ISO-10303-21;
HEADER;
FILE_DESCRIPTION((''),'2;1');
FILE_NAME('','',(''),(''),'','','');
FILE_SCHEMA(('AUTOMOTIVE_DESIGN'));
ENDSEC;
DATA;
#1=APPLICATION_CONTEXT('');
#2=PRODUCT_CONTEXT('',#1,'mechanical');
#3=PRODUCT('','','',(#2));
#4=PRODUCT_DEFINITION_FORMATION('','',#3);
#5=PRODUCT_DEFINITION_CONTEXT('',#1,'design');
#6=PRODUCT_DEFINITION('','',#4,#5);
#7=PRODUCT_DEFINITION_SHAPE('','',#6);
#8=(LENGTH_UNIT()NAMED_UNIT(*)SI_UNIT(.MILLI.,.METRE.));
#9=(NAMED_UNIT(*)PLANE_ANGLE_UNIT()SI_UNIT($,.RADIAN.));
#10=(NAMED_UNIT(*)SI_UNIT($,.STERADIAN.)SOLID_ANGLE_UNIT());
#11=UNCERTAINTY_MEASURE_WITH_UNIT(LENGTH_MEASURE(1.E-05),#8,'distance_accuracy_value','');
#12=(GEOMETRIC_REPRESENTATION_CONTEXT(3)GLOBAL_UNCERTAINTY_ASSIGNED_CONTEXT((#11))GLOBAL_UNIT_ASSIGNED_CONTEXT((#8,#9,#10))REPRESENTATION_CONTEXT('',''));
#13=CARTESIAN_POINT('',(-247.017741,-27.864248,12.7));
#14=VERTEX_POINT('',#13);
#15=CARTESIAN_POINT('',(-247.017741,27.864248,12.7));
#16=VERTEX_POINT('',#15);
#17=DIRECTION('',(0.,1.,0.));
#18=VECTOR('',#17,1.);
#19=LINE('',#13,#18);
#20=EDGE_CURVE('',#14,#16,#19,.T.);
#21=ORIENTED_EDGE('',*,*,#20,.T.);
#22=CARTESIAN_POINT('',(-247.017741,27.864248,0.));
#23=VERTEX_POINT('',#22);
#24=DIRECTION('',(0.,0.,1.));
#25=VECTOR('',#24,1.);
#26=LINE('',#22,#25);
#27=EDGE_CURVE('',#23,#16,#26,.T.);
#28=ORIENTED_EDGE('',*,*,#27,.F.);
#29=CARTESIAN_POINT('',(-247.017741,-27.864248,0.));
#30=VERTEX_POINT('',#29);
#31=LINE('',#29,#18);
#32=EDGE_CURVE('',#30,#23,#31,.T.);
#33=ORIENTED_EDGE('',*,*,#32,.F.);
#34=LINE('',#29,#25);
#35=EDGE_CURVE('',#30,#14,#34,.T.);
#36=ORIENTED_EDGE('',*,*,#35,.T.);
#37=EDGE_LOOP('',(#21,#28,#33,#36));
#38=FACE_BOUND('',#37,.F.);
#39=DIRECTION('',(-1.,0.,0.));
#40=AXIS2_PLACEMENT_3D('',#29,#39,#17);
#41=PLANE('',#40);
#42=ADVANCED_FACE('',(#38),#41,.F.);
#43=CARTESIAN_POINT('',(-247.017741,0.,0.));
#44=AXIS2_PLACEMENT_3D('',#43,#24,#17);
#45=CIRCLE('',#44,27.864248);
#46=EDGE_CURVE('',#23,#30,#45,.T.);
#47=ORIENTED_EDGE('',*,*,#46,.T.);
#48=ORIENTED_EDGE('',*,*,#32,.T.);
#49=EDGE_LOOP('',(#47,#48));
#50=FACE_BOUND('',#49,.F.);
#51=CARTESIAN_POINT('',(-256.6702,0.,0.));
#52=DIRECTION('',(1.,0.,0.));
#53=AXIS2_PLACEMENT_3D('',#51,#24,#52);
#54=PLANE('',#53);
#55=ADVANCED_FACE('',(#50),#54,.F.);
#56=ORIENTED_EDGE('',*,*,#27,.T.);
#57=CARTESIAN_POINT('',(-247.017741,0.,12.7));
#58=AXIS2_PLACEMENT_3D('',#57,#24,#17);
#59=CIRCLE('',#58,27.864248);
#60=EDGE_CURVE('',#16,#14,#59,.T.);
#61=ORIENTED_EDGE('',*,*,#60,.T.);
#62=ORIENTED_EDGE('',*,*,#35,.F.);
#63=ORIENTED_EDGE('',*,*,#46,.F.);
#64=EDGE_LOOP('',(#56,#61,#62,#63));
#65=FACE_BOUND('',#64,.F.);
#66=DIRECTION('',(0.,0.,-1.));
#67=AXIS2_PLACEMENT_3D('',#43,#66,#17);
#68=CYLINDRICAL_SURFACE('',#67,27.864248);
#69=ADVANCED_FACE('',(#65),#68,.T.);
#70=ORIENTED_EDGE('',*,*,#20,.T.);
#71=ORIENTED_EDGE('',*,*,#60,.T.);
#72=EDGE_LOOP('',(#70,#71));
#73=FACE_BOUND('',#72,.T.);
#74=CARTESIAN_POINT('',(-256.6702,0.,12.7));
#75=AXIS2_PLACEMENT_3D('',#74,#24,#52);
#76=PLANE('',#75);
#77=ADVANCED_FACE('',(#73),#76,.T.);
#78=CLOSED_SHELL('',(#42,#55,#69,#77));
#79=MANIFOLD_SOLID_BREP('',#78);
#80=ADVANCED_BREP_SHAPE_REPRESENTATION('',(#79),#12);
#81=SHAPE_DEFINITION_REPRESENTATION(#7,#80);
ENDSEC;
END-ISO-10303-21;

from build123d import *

# Parameters (mm, degrees)
F4_DEPTH = 12.7
F5_R     = 6.1731972722
F6_DEPTH = 12.7
F7_DEPTH = 12.7


# Not quite as in the source:
# - a feature of the source that left no trace in its solid (it failed there, or was rolled back) is left out


with BuildPart() as f4:
    # F3 (on Top) → F4 (new body)
    with BuildSketch(Plane.XY):
        with BuildLine():
            Line((-247.0177412033, 0), (-247.0177412033, 27.8642479823))
            ThreePointArc((-247.0177412033, 27.8642479823), (-274.8819891856, 0), (-247.0177412033, -27.8642479823))
            Line((-247.0177412033, -27.8642479823), (-247.0177412033, 0))
        make_face()
    extrude(amount=F4_DEPTH)

    # F5 (on face) → F6 (join)
    with BuildSketch(Plane.XY.offset(12.7)):
        with Locations((-258.7949037552, 0)):
            Circle(F5_R)
    extrude(amount=-F6_DEPTH)

    # F5 (on face) → F7 (join)
    with BuildSketch(Plane.XY.offset(12.7)):
        with Locations((-258.7949037552, 0)):
            Circle(F5_R)
    extrude(amount=-F7_DEPTH)


solid = f4.part
